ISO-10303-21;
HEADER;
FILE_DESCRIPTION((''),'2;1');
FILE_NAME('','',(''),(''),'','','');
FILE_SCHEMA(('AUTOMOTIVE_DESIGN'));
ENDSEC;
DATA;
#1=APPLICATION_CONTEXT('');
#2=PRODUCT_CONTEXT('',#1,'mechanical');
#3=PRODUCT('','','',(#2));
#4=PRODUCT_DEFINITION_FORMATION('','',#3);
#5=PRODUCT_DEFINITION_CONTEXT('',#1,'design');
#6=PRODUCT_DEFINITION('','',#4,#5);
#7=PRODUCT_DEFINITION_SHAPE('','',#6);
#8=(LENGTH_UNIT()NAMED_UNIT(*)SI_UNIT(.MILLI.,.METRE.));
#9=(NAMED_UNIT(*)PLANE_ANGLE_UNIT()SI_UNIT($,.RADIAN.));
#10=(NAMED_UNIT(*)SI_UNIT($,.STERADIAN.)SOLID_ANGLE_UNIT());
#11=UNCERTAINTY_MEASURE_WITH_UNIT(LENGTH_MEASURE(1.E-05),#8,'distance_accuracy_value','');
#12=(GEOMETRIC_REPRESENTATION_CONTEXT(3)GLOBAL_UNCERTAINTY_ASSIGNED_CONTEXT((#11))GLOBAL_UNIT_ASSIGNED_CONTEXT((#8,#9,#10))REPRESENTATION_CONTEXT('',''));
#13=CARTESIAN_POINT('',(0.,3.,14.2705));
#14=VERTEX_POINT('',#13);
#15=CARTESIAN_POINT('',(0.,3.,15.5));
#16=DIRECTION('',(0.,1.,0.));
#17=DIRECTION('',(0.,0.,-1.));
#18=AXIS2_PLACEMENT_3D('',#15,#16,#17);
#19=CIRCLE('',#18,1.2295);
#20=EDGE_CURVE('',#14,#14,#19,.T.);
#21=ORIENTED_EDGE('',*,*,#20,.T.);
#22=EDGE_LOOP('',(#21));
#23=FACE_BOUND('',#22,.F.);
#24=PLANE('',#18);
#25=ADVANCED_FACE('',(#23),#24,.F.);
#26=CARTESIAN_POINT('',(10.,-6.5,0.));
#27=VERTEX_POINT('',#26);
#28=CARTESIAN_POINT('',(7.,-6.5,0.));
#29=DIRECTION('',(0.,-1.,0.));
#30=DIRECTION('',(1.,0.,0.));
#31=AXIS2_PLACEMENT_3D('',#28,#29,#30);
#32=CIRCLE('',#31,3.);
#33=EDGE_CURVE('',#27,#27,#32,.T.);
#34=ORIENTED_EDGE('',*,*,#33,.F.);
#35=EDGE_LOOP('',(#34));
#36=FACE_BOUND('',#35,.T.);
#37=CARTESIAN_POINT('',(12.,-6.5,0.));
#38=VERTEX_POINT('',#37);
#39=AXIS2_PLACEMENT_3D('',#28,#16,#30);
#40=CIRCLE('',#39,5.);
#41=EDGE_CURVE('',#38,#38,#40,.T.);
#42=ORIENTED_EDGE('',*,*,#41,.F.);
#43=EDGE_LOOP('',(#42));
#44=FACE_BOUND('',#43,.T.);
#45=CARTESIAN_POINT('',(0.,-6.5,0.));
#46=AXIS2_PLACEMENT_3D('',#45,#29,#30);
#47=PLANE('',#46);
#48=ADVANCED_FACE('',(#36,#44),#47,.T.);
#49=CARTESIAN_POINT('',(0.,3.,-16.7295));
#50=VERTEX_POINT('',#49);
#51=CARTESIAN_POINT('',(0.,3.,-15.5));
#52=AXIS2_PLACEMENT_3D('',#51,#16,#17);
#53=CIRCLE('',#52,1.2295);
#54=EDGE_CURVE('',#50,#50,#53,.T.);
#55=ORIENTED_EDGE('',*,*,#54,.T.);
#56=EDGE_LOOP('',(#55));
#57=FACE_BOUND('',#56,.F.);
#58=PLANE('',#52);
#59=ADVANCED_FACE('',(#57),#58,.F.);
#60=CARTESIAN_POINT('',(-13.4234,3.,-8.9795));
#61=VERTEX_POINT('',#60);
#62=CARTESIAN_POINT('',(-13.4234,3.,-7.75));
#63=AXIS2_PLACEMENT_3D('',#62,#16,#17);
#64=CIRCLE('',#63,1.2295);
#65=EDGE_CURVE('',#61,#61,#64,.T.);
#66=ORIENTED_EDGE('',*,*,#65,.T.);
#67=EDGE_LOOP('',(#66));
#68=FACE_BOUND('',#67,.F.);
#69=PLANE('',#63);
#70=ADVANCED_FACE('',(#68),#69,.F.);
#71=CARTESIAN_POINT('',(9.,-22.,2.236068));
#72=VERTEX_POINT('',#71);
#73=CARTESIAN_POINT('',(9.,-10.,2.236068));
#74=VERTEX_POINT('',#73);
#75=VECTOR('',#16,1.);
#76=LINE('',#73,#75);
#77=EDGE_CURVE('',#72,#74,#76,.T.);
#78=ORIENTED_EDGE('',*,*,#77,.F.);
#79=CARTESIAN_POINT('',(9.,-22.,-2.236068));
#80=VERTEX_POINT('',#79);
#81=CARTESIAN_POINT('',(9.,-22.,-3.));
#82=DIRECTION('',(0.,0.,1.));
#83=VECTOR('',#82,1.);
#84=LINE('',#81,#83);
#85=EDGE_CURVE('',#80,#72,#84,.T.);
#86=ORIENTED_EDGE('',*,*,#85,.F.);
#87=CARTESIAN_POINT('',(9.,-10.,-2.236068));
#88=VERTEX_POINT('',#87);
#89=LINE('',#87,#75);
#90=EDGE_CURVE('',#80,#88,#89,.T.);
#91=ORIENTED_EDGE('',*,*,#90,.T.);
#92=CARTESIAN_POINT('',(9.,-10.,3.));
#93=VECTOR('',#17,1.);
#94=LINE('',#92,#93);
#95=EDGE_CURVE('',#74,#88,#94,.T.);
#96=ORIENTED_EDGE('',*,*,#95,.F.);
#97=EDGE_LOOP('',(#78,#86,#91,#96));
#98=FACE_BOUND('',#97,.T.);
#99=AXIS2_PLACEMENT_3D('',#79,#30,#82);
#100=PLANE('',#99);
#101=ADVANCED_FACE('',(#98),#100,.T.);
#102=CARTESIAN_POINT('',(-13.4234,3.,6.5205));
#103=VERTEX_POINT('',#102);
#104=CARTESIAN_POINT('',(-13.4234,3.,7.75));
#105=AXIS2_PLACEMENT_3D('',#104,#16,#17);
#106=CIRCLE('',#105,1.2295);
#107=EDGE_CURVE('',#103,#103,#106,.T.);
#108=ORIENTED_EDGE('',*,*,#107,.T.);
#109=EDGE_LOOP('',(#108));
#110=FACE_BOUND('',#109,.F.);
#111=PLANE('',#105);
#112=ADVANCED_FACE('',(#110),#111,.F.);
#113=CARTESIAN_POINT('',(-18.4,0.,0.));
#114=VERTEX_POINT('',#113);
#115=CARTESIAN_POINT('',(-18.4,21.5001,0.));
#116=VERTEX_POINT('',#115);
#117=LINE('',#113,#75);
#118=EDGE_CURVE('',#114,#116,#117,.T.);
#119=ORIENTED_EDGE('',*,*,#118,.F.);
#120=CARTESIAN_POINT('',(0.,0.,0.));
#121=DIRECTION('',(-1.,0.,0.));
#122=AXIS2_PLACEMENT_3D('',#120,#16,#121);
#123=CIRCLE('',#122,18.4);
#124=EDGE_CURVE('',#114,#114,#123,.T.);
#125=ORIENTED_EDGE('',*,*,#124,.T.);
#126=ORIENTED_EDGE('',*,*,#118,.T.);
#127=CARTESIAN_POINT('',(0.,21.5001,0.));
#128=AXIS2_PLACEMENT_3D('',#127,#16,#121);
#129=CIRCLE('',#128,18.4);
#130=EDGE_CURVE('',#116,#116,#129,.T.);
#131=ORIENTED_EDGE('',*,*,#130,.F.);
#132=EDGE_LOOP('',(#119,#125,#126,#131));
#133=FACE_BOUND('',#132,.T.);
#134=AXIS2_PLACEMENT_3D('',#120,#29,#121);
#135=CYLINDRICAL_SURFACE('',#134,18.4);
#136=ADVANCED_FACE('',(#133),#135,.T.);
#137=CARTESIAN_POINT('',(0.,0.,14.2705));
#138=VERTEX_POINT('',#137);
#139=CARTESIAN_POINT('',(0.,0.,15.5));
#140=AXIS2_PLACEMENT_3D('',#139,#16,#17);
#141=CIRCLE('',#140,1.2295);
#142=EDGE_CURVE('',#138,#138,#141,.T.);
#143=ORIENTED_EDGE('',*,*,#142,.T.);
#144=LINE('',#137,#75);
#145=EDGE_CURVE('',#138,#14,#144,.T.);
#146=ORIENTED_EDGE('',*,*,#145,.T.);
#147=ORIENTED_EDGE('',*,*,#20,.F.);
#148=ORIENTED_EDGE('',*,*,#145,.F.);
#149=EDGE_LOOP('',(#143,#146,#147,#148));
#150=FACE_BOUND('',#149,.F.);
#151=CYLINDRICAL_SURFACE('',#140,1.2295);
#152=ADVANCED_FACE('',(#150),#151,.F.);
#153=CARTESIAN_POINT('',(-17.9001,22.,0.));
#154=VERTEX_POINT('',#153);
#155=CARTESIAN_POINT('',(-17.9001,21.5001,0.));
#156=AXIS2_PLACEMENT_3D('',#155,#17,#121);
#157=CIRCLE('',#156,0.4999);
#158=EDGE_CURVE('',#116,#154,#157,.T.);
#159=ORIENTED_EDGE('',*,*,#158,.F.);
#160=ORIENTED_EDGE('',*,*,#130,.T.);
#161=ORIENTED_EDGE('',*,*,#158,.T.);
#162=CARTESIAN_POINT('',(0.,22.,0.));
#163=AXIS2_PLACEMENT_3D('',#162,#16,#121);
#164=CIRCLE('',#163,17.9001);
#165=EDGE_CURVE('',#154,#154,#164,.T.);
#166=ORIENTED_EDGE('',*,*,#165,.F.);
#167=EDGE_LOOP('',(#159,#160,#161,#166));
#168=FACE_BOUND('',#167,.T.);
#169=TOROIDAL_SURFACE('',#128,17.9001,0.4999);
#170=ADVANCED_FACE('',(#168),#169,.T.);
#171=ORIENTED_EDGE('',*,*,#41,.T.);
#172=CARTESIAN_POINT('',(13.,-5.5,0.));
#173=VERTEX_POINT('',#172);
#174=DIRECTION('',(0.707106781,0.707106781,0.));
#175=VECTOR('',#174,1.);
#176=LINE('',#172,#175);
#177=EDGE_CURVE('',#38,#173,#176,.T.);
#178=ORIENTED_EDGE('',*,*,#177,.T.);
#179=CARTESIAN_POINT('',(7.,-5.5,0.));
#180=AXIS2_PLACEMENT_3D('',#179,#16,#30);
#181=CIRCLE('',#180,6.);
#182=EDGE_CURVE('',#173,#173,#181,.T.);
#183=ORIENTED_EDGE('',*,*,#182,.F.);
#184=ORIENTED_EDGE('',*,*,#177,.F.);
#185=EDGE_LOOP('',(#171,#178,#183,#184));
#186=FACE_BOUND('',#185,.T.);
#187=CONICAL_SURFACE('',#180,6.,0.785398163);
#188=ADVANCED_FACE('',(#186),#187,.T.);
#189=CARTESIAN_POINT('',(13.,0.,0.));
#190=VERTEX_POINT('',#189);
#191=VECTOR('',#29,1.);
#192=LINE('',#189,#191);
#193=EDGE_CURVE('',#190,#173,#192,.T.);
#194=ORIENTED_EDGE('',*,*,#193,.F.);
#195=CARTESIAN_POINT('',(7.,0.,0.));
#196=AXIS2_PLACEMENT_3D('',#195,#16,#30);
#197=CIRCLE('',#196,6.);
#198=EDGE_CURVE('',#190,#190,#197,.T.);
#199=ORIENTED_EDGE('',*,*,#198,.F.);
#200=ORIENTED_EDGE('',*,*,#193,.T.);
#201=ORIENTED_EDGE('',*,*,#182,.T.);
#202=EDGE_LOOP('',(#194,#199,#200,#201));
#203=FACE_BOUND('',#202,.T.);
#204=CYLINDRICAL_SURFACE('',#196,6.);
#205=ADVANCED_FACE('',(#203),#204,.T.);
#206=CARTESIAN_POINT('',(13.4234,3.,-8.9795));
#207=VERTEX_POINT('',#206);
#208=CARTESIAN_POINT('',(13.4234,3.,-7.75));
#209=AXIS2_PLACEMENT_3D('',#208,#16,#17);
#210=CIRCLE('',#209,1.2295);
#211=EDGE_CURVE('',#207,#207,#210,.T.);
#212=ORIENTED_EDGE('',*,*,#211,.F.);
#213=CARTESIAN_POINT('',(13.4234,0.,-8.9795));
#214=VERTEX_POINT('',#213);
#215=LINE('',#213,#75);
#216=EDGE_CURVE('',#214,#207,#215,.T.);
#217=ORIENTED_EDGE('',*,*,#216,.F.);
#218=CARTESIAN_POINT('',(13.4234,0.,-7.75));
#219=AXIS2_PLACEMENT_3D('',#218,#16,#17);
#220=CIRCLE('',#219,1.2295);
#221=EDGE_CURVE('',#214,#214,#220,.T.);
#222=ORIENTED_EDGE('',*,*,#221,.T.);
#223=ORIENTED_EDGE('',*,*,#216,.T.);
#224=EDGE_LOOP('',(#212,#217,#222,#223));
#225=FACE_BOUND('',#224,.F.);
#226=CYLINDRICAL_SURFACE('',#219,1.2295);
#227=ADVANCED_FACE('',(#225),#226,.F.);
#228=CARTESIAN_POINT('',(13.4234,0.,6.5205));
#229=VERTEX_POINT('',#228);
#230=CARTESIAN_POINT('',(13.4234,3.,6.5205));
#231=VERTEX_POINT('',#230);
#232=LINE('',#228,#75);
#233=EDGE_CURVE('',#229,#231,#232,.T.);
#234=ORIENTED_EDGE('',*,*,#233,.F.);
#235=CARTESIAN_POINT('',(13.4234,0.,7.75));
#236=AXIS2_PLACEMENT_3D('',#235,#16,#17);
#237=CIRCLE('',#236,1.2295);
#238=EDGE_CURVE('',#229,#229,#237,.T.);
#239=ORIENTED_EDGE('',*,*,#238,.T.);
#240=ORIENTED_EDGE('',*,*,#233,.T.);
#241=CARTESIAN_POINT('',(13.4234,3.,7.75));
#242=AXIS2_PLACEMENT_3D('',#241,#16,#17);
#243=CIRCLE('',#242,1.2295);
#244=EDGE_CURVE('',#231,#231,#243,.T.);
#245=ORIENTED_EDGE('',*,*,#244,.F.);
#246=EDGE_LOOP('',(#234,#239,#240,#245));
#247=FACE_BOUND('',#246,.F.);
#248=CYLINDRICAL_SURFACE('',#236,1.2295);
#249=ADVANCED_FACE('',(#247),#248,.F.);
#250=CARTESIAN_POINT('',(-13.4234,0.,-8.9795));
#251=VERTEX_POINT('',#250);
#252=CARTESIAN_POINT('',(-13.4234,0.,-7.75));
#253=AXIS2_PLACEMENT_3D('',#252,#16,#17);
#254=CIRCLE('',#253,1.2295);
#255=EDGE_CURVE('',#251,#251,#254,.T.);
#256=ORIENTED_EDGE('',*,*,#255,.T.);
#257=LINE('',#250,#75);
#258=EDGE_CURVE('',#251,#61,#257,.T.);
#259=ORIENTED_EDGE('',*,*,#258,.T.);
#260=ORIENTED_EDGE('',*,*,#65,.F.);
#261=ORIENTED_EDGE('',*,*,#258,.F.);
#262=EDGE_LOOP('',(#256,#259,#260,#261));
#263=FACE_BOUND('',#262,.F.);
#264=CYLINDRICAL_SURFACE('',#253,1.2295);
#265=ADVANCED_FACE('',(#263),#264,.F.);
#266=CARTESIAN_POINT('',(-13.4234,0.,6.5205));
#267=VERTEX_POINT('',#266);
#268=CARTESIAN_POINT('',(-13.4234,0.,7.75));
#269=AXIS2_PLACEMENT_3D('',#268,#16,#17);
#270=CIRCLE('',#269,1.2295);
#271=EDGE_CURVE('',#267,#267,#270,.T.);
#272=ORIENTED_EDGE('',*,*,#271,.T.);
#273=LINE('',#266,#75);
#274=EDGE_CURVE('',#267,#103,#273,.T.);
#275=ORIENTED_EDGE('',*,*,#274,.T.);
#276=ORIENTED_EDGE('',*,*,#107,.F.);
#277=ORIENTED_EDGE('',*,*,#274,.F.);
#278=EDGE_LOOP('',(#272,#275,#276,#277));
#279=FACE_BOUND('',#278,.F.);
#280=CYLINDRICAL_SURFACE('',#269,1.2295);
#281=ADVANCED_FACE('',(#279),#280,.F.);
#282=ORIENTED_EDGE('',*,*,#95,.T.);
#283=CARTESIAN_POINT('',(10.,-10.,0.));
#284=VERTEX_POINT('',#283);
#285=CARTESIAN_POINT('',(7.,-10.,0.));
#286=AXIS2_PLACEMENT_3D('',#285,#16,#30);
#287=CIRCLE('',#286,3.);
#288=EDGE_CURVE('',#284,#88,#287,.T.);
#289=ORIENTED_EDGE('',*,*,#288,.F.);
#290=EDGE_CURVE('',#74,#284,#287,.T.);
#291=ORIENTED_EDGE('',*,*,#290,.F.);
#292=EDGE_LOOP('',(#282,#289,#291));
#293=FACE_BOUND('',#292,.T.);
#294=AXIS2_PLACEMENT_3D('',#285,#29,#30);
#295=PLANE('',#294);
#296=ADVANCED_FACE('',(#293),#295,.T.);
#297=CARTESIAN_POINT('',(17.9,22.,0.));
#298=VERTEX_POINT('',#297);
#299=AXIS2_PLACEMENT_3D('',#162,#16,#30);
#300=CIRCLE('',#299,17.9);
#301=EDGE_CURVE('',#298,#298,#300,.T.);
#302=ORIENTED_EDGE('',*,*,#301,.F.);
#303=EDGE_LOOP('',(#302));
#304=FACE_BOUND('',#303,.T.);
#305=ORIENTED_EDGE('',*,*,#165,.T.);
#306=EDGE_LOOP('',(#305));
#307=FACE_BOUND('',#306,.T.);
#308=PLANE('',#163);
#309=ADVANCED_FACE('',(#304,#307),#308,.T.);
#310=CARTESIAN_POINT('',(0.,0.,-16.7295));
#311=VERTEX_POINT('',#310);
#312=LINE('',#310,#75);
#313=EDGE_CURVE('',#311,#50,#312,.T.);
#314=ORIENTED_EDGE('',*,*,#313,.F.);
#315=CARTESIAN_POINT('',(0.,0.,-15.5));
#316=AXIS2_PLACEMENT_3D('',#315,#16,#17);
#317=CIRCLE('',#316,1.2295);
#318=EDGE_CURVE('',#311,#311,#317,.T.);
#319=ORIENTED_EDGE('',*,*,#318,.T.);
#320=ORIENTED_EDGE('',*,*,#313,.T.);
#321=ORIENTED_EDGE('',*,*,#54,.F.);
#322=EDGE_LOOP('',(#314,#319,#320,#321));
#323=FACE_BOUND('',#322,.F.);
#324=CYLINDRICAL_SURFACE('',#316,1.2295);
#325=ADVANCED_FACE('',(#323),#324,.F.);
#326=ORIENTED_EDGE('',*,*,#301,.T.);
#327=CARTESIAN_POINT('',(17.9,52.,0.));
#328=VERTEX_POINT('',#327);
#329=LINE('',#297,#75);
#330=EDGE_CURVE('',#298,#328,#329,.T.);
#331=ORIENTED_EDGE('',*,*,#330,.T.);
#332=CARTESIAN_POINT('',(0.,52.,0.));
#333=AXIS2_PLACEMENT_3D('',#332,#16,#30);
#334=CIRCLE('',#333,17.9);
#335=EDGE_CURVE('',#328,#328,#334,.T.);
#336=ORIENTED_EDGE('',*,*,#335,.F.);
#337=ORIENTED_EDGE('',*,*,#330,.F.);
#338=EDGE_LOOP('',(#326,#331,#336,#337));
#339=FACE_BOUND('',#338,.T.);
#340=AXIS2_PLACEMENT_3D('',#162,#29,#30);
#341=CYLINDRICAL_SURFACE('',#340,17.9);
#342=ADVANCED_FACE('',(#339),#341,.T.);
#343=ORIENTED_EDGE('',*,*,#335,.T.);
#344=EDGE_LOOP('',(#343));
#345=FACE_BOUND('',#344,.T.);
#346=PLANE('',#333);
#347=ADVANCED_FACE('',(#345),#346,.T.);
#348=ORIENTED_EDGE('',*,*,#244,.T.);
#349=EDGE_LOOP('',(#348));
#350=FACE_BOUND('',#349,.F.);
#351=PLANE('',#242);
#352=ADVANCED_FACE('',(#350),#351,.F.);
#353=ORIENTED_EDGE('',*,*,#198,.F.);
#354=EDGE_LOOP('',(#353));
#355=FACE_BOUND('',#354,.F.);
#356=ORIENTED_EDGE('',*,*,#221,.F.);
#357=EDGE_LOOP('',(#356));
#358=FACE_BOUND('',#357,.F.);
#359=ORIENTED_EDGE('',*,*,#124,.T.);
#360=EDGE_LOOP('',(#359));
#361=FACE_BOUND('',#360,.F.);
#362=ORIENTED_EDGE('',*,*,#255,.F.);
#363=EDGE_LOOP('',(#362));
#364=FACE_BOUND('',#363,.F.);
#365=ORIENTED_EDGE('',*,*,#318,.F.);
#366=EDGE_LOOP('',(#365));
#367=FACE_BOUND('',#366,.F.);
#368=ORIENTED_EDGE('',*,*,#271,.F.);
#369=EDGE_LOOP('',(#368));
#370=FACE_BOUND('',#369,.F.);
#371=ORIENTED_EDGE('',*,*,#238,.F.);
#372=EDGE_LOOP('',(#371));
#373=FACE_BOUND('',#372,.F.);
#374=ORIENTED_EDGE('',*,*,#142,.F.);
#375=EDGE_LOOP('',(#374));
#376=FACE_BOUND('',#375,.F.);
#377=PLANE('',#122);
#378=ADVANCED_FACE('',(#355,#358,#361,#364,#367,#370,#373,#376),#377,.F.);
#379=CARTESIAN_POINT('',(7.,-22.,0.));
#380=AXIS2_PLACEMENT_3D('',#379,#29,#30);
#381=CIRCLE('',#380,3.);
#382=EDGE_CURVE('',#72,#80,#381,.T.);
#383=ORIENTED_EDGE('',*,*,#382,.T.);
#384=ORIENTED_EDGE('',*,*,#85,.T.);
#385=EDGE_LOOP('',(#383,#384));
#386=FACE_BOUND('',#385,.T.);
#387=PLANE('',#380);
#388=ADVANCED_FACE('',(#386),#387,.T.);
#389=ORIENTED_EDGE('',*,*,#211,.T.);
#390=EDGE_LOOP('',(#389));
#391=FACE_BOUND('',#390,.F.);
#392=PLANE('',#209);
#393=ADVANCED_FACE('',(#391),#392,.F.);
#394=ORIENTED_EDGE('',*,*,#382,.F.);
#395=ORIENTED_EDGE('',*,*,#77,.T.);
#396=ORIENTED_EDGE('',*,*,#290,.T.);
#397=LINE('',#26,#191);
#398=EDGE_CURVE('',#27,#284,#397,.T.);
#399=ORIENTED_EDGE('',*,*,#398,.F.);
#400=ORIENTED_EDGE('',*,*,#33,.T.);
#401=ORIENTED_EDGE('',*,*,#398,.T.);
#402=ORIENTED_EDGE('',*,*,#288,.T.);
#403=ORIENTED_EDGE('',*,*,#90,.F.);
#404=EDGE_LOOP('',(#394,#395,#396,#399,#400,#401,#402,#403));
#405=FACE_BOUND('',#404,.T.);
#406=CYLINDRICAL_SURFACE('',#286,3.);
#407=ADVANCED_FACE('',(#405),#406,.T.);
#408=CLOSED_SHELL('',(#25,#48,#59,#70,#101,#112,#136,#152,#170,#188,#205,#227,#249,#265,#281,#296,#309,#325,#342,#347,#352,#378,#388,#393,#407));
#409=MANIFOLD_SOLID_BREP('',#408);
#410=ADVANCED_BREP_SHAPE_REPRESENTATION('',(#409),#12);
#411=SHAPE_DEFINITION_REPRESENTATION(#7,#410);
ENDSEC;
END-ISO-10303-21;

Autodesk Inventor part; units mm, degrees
ref_plane "YZ Plane" through (0, 0, 0) normal (1, 0, 0) x (0, 1, 0)
ref_plane "XZ Plane" through (0, 0, 0) normal (0, 1, 0) x (-1, 0, 0)
ref_plane "XY Plane" through (0, 0, 0) normal (0, 0, 1) x (1, 0, 0)
sketch "Sketch1" plane through (0, 0, 0) normal (0, 1, 0) x (-1, 0, 0)
  circle A0 centre (0, 0) radius 18.4
  dimension "d0" = 36.8
extrude "Extrusion1" add sketch "Sketch1" along normal blind 22
sketch "Sketch2" plane through (0, 22, 0) normal (0, 1, 0) x (1, 0, 0)
  circle A0 centre (0, 0) radius 18.4 projected
  circle A1 centre (0, 0) radius 17.9
  dimension "d3" = 35.8
extrude "Extrusion2" add sketch "Sketch2" along normal blind 30 contours A1
fillet "Fillet1" radius 0.5 1 edges at (18.4, 22, 0)
sketch "Sketch3" plane through (0, 0, 0) normal (0, -1, 0) x (1, 0, 0)
  circle A0 centre (0, 0) radius 18.4 projected
  line L0 (0, 0) -> (7, 0)
  circle A1 centre (7, 0) radius 6
  dimension "d7" = 7
  dimension "d8" = 12
extrude "Extrusion3" add sketch "Sketch3" along normal blind 6.5 contours A1
sketch "Sketch4" plane through (7, -6.5, 0) normal (0, -1, 0) x (1, 0, 0)
  circle A0 centre (0, 0) radius 6 projected
  circle A1 centre (0, 0) radius 3
  point P0 (-7, 0)
  dimension "d11" = 6
extrude "Extrusion4" add sketch "Sketch4" along normal blind 3.5 contours A1
sketch "Sketch5" plane through (7, -10, 0) normal (0, -1, 0) x (1, 0, 0)
  circle A0 centre (0, 0) radius 3 projected
  point P0 (-7, 0)
extrude "Extrusion5" add sketch "Sketch5" along normal blind 12
chamfer "Chamfer1" distance 1 angle 45 1 edges at (1, -6.5, 0)
sketch "Sketch6" plane through (7, -22, 0) normal (0, -1, 0) x (1, 0, 0)
  circle A0 centre (0, 0) radius 3 projected
  line L0 (3, 0) -> (2.4, 0)
  line L1 (3.4, -3) -> (2, -3)
  line L2 (2, -3) -> (2, 3)
  line L3 (2, 3) -> (3.4, 3)
  line L4 (3.4, 3) -> (3.4, -3)
  line L5 (3.4, -3) -> (2, 3) construction
  line L6 (2, -3) -> (3.4, 3) construction
  point P0 (-7, 0)
  point P1 (2.7, 0)
  dimension "d19" = 0.6
extrude "Extrusion6" cut sketch "Sketch6" against normal blind 12 contours A0 L2 | A0 L2 L3 L4 L1 picked at (2.1409, -0.5898)
sketch "Sketch7" plane through (0, 0, 0) normal (0, -1, 0) x (1, 0, 0)
  circle A0 centre (0, 0) radius 18.4 projected
  circle A1 centre (0, 0) radius 15.5
  circle A2 centre (0, 15.5) radius 1.2
  circle A3 centre (0, -15.5) radius 1.2
  circle A4 centre (-13.4234, -7.75) radius 1.2
  circle A5 centre (13.4234, -7.75) radius 1.2
  circle A6 centre (-13.4234, 7.75) radius 1.2
  circle A7 centre (13.4234, 7.75) radius 1.2
  dimension "d22" = 31
  dimension "d23" = 2.4
  dimension "d24" = 2.4
  dimension "d28" = 2.4
  dimension "d29" = 2.4
  dimension "d32" = 2.4
  dimension "d33" = 15.5
  dimension "d34" = 2.4
hole "Hole1" at (13.4234, 0, 7.75) at (13.4234, 0, -7.75) at (0, 0, 15.5) at (-13.4234, 0, 7.75) at (-13.4234, 0, -7.75) at (0, 0, -15.5) direction (0, 1, 0) diameter 2.459 depth 3 thread size "M3x0.5" designation "M3" class "6H" standard "GB Metric profile"
properties part number "DC_motor_with_encoder"
